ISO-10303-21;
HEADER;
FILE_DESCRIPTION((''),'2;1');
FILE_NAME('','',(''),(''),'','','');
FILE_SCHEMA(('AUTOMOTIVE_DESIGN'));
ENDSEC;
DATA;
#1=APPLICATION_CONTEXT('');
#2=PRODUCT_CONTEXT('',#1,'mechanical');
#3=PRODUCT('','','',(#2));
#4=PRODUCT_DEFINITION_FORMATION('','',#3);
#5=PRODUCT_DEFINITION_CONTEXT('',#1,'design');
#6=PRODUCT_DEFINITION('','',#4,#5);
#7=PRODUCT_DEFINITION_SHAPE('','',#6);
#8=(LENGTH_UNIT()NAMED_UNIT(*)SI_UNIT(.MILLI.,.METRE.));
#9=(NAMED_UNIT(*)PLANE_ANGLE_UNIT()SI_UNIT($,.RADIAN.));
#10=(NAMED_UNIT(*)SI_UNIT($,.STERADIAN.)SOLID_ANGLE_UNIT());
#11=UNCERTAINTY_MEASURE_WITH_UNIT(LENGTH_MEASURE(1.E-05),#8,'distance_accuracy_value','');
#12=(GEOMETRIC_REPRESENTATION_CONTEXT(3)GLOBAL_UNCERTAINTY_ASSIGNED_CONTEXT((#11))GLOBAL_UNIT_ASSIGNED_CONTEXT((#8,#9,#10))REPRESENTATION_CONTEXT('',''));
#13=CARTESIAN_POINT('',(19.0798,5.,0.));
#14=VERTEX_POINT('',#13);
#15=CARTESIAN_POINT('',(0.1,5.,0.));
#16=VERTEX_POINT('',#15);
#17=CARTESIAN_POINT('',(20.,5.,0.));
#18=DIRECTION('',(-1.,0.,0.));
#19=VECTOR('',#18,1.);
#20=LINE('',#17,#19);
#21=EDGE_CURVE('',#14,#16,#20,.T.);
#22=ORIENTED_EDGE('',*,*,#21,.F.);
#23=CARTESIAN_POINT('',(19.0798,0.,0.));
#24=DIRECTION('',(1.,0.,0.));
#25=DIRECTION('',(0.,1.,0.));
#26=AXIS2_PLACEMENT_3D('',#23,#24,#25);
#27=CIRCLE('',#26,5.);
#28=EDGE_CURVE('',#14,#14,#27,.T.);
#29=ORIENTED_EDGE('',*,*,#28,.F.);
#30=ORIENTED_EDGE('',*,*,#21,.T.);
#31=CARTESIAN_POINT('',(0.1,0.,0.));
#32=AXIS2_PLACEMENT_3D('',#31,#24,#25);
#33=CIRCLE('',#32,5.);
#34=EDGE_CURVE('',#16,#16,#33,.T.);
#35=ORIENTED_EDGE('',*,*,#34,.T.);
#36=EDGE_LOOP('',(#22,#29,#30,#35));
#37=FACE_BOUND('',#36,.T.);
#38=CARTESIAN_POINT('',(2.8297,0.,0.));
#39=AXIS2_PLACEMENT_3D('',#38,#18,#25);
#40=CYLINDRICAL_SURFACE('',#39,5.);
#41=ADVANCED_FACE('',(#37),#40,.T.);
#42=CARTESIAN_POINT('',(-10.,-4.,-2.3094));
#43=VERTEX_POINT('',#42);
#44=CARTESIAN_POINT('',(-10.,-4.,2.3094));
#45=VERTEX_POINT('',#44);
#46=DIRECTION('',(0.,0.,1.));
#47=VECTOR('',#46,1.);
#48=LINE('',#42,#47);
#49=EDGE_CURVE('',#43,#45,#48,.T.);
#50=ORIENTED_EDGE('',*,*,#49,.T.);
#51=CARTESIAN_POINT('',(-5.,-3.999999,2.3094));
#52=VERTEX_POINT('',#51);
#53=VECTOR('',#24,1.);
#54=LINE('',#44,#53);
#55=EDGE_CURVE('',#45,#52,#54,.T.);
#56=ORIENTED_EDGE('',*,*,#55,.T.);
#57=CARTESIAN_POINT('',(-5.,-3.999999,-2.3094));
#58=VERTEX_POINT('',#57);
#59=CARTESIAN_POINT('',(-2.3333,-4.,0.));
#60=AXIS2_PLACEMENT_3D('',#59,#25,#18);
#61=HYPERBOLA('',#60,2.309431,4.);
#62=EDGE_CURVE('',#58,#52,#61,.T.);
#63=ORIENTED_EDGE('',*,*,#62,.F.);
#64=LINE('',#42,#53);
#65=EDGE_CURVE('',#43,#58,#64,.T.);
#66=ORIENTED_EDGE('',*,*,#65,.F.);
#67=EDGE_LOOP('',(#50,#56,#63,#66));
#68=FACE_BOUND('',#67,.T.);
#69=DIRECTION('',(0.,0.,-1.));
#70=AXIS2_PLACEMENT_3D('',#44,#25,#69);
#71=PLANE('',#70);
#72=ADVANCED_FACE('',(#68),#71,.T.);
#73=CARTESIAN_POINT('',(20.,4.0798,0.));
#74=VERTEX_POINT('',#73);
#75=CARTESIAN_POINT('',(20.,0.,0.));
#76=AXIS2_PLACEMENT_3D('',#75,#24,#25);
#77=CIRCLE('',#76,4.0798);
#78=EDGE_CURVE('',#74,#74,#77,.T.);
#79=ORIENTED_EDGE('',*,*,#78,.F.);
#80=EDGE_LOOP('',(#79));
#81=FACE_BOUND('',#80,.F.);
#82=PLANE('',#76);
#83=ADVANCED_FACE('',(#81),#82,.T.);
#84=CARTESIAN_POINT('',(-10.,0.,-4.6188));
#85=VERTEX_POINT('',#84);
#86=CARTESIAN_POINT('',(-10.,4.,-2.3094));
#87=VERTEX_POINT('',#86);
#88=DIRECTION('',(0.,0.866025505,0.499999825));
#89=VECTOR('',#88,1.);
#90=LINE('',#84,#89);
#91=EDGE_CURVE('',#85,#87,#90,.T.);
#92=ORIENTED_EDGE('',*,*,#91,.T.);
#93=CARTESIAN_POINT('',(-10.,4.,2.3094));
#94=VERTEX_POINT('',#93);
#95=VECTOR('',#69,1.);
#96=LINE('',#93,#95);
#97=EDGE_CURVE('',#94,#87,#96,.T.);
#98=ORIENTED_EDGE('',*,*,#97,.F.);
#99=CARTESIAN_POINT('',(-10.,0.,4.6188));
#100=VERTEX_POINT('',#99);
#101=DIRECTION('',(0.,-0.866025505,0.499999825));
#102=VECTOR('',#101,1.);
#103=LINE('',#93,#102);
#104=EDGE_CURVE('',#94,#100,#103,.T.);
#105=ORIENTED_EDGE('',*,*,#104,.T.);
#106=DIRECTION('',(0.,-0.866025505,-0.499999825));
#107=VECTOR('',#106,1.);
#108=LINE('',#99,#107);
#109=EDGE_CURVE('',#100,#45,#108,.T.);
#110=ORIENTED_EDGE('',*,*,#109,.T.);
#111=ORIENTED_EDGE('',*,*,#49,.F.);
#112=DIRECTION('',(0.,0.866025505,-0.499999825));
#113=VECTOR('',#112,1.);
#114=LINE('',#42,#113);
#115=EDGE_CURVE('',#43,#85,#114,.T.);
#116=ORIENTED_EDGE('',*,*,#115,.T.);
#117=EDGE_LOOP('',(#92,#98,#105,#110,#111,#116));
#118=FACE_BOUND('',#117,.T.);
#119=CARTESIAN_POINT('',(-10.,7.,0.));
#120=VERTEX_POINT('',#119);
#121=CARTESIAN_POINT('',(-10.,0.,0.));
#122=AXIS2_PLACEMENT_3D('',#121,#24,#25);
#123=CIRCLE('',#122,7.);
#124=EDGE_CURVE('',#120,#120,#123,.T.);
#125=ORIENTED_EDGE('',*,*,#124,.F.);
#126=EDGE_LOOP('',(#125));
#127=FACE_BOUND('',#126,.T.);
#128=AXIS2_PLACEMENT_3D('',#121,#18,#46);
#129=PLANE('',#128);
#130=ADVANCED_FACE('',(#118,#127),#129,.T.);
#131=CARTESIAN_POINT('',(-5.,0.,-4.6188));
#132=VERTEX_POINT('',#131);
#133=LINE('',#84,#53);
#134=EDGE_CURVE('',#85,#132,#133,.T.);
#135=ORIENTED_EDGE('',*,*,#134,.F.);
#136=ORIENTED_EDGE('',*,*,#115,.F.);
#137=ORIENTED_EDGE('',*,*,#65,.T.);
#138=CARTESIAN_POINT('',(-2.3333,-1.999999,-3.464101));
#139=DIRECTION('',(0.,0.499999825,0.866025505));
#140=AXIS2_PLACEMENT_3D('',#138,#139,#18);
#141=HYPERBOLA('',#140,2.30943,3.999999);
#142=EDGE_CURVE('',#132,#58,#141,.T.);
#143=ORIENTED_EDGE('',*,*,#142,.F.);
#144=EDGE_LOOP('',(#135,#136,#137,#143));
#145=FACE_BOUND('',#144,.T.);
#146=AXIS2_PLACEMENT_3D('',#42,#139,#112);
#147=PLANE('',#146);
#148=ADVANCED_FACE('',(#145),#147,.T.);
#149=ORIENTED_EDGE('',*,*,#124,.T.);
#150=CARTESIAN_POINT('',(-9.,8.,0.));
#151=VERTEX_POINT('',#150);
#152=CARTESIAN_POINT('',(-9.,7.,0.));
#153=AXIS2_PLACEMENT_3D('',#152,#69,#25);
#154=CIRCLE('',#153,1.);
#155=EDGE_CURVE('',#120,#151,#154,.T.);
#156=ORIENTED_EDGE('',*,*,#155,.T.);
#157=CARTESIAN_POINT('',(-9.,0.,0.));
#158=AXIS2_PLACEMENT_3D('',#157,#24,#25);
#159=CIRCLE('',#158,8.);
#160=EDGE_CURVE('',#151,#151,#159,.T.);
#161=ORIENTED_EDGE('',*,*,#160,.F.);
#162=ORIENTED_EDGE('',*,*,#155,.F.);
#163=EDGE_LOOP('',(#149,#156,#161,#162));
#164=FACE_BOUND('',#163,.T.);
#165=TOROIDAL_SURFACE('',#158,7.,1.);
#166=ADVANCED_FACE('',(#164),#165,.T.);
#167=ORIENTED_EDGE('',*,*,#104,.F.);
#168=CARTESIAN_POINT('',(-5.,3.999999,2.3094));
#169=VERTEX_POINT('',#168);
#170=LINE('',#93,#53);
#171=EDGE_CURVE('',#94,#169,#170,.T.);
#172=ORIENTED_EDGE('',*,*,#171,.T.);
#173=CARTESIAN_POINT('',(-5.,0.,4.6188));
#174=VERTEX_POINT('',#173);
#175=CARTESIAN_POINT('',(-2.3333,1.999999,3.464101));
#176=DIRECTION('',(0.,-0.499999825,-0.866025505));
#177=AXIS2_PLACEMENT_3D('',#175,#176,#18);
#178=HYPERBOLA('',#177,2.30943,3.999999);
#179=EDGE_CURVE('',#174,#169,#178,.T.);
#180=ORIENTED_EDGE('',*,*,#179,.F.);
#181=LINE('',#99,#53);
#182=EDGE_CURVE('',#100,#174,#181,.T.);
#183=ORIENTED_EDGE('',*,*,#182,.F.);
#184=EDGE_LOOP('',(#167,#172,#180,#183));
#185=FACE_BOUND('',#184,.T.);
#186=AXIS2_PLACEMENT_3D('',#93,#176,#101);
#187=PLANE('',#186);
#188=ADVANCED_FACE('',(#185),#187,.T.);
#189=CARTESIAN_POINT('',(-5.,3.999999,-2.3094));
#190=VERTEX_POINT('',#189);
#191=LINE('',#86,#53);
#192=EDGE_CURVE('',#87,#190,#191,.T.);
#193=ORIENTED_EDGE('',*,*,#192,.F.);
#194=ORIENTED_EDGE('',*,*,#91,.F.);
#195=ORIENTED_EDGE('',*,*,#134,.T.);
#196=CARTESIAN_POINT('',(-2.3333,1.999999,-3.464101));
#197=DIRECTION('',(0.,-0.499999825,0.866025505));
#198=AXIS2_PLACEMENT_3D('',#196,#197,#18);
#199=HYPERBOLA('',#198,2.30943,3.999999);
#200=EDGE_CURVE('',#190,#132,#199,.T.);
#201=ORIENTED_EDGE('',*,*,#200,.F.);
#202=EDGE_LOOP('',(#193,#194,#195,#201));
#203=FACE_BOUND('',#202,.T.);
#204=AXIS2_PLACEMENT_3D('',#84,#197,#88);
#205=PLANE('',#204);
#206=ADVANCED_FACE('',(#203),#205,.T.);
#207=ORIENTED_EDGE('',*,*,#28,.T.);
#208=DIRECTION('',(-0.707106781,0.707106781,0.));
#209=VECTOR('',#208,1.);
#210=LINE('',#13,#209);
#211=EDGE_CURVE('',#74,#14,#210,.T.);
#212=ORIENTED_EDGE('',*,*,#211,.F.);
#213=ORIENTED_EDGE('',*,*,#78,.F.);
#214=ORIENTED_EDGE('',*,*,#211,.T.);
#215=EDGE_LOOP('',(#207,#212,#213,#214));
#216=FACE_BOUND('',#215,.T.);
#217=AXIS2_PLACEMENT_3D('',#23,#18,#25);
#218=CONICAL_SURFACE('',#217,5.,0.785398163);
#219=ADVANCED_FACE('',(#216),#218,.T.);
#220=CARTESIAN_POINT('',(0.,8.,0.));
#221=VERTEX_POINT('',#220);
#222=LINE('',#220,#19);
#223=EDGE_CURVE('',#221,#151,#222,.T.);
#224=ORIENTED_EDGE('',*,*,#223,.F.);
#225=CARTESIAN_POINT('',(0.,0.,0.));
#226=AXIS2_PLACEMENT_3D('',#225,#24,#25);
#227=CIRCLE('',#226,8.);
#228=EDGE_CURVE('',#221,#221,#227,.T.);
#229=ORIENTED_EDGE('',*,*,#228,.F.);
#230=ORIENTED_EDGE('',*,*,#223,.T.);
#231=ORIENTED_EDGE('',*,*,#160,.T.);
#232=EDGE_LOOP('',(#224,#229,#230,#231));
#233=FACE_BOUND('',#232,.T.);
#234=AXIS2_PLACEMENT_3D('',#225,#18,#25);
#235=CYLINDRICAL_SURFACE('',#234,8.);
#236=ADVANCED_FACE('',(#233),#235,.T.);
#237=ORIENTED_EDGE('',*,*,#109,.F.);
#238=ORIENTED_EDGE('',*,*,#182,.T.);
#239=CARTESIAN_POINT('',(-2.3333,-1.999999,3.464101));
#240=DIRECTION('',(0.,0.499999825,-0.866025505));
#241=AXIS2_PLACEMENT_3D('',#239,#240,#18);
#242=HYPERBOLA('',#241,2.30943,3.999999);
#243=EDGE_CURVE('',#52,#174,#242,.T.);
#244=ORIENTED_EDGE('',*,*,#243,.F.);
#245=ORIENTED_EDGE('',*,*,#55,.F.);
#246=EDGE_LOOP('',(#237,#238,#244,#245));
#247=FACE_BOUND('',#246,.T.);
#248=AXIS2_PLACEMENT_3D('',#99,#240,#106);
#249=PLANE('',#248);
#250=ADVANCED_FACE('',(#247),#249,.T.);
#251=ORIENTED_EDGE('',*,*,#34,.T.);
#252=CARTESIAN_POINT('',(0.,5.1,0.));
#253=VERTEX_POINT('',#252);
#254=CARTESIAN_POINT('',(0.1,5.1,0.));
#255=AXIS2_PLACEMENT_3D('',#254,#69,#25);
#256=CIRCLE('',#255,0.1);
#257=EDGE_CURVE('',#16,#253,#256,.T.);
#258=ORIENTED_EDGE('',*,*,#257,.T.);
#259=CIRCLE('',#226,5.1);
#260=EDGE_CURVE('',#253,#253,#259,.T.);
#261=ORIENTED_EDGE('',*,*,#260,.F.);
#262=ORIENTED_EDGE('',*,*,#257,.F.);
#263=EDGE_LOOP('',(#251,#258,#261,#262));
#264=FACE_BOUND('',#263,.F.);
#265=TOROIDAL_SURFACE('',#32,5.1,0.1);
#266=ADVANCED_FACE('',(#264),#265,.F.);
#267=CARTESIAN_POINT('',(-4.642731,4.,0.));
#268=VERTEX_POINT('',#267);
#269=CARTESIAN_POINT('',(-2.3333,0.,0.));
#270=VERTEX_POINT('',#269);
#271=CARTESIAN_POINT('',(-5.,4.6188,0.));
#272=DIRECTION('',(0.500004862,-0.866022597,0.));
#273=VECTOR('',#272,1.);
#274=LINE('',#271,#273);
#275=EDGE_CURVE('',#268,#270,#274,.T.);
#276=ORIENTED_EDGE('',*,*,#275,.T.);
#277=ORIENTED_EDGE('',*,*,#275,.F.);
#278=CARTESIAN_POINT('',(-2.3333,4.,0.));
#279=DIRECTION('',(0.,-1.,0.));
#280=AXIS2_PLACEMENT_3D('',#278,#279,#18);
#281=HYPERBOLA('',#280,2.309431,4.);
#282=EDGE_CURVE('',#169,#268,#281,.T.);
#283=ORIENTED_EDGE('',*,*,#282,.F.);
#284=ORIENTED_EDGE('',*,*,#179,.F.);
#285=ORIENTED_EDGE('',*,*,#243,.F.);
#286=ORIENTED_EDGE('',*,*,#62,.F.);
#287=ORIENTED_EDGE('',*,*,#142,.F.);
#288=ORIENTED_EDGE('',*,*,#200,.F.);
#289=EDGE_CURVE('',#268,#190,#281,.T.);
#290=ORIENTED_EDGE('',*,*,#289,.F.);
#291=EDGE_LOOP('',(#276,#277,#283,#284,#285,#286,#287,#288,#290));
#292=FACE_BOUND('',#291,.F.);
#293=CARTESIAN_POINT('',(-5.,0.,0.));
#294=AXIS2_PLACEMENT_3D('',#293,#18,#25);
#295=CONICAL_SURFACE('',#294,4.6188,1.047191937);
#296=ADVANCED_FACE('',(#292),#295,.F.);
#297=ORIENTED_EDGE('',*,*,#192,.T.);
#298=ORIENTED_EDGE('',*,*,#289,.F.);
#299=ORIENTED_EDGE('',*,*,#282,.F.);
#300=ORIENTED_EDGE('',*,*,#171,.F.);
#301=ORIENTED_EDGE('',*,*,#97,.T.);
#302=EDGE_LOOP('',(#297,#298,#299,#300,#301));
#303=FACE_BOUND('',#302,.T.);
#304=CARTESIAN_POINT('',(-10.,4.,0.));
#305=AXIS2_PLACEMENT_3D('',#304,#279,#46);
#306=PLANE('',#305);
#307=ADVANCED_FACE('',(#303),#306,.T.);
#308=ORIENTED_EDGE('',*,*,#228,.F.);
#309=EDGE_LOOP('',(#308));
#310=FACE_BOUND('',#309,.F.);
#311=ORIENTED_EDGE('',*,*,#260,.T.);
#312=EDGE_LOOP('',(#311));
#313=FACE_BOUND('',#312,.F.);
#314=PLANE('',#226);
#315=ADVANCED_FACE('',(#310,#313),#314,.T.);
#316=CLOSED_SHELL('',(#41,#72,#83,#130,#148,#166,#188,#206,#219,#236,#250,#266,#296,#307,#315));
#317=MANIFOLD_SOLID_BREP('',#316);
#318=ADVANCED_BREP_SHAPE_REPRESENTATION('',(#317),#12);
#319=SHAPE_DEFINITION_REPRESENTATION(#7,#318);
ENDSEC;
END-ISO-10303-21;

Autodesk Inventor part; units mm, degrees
ref_plane "YZ Plane" through (0, 0, 0) normal (1, 0, 0) x (0, 1, 0)
ref_plane "XZ Plane" through (0, 0, 0) normal (0, 1, 0) x (-1, 0, 0)
sketch "Skizze1" plane through (0, 0, 0) normal (0, 0, 1) x (1, 0, 0)
  line L0 (-2.3333, 0) -> (20, 0)
  line L1 (20, 0) -> (20, 5)
  line L2 (20, 5) -> (3.75, 5)
  line L3 (3.75, 5) -> (2.8297, 5)
  line L4 (2.8297, 5) -> (0, 5)
  line L5 (0, 5) -> (0, 8)
  line L6 (0, 8) -> (-10, 8)
  line L7 (-10, 8) -> (-10, 4.6188)
  line L8 (-10, 4.6188) -> (-5, 4.6188)
  line L9 (-5, 4.6188) -> (-2.3333, 0)
  line L10 (-16, 0) -> (26, 0) projected
  line L11 (0, -1.6) -> (0, 9.6) projected
  line L12 (3.75, 5) -> (0, 5) construction
  dimension "d1" = 16.25
  dimension "d2" = 0.9203
  dimension "d3" = 10
  dimension "d4" = 5
  dimension "d5" = 60
  dimension "d6" = 10
  dimension "d7" = 10
  dimension "d8" = 9.2376
  dimension "d9" = 16
  dimension "d26" = 20
revolve "Körper" add sketch "Skizze1" angle 360 about axis through (-2.3333, 0, 0) along (1, 0, 0)
sketch "Skizze2" plane through (-10, 0, 0) normal (-1, 0, 0) x (0, 0, 1)
  circle A0 centre (0, 0) radius 4.6188 projected
  line L0 (0, -11.2) -> (0, 11.2) projected
  line L1 (-11.2, 0) -> (11.2, 0) projected
  line L2 (4.6188, 0) -> (2.3094, -4)
  line L3 (2.3094, -4) -> (-2.3094, -4)
  line L4 (-2.3094, -4) -> (-4.6188, 0)
  line L5 (-4.6188, 0) -> (-2.3094, 4)
  line L6 (-2.3094, 4) -> (2.3094, 4)
  line L7 (2.3094, 4) -> (4.6188, 0)
  point P0 (0, 0)
extrude "Loch" add sketch "Skizze2" against normal up to next contours L7 A0 | A0 L2 | L6 L0 A0 | A0 L0 L3 | L0 L6 A0 | A0 L3 L0 | L4 A0 | A0 L5
fillet "Rundung1" radius 1 1 edges at (-10, -8, 0)
thread "Gewinde" size "M10x1.5" class "6g" standard "ISO Metric profile" length 16.25
chamfer "Fase1" distance 0.9202 distance2 0.9202 1 edges at (20, -5, 0) measured on face at (20, -0.8193, -0.3214)
ref_plane "Work Plane1" through (29, 0, 0) normal (0, -1, 0) x (1, 0, 0)
fillet "Fillet2" radius 0.1 1 edges at (0, -5, 0)
equation "\"d30\" = R"
equation "\"d17\" = RR"
equation "\"d13\" = GEL"
equation "\"d15\" = -0.5 * SPD + 0.5 * GD"
equation "\"d16\" = GUL"
equation "\"d1\" = GEL"
equation "\"d3\" = KOH"
equation "\"d4\" = INTI"
equation "\"d6\" = GD"
equation "\"d7\" = BDM"
equation "\"d8\" = 1.1547 * SW"
equation "\"d9\" = KOD"
equation "\"d26\" = NLG"
equation "\"GD\" = 10"
equation "\"NLG\" = 20"
equation "\"GEL\" = 16.25"
equation "\"KOD\" = 16"
equation "\"KOH\" = 10"
equation "\"INTI\" = 5"
equation "\"GAL\" = 0.61345 * PTC"
equation "\"GUL\" = 0.61345 * PTC"
equation "\"BDM\" = NND"
equation "\"SW\" = 8"
equation "\"RR\" = 1"
equation "\"SPD\" = NND - 1.2269 * PTC"
equation "\"R\" = 0.1"
equation "\"TOA\" = 30deg"
equation "\"GD1\" = THREADDIA - 1.2269 * PTC"
equation "\"FAWI\" = 45deg"
equation "\"PTC\" = 1.5"
equation "\"E0\" = 1.155 * SW"
equation "\"NND\" = 10"
equation "\"THREADDIA\" = 10"
properties part number "ISO 4762 - M10 x 20" material "Edelstahl, 440C"
